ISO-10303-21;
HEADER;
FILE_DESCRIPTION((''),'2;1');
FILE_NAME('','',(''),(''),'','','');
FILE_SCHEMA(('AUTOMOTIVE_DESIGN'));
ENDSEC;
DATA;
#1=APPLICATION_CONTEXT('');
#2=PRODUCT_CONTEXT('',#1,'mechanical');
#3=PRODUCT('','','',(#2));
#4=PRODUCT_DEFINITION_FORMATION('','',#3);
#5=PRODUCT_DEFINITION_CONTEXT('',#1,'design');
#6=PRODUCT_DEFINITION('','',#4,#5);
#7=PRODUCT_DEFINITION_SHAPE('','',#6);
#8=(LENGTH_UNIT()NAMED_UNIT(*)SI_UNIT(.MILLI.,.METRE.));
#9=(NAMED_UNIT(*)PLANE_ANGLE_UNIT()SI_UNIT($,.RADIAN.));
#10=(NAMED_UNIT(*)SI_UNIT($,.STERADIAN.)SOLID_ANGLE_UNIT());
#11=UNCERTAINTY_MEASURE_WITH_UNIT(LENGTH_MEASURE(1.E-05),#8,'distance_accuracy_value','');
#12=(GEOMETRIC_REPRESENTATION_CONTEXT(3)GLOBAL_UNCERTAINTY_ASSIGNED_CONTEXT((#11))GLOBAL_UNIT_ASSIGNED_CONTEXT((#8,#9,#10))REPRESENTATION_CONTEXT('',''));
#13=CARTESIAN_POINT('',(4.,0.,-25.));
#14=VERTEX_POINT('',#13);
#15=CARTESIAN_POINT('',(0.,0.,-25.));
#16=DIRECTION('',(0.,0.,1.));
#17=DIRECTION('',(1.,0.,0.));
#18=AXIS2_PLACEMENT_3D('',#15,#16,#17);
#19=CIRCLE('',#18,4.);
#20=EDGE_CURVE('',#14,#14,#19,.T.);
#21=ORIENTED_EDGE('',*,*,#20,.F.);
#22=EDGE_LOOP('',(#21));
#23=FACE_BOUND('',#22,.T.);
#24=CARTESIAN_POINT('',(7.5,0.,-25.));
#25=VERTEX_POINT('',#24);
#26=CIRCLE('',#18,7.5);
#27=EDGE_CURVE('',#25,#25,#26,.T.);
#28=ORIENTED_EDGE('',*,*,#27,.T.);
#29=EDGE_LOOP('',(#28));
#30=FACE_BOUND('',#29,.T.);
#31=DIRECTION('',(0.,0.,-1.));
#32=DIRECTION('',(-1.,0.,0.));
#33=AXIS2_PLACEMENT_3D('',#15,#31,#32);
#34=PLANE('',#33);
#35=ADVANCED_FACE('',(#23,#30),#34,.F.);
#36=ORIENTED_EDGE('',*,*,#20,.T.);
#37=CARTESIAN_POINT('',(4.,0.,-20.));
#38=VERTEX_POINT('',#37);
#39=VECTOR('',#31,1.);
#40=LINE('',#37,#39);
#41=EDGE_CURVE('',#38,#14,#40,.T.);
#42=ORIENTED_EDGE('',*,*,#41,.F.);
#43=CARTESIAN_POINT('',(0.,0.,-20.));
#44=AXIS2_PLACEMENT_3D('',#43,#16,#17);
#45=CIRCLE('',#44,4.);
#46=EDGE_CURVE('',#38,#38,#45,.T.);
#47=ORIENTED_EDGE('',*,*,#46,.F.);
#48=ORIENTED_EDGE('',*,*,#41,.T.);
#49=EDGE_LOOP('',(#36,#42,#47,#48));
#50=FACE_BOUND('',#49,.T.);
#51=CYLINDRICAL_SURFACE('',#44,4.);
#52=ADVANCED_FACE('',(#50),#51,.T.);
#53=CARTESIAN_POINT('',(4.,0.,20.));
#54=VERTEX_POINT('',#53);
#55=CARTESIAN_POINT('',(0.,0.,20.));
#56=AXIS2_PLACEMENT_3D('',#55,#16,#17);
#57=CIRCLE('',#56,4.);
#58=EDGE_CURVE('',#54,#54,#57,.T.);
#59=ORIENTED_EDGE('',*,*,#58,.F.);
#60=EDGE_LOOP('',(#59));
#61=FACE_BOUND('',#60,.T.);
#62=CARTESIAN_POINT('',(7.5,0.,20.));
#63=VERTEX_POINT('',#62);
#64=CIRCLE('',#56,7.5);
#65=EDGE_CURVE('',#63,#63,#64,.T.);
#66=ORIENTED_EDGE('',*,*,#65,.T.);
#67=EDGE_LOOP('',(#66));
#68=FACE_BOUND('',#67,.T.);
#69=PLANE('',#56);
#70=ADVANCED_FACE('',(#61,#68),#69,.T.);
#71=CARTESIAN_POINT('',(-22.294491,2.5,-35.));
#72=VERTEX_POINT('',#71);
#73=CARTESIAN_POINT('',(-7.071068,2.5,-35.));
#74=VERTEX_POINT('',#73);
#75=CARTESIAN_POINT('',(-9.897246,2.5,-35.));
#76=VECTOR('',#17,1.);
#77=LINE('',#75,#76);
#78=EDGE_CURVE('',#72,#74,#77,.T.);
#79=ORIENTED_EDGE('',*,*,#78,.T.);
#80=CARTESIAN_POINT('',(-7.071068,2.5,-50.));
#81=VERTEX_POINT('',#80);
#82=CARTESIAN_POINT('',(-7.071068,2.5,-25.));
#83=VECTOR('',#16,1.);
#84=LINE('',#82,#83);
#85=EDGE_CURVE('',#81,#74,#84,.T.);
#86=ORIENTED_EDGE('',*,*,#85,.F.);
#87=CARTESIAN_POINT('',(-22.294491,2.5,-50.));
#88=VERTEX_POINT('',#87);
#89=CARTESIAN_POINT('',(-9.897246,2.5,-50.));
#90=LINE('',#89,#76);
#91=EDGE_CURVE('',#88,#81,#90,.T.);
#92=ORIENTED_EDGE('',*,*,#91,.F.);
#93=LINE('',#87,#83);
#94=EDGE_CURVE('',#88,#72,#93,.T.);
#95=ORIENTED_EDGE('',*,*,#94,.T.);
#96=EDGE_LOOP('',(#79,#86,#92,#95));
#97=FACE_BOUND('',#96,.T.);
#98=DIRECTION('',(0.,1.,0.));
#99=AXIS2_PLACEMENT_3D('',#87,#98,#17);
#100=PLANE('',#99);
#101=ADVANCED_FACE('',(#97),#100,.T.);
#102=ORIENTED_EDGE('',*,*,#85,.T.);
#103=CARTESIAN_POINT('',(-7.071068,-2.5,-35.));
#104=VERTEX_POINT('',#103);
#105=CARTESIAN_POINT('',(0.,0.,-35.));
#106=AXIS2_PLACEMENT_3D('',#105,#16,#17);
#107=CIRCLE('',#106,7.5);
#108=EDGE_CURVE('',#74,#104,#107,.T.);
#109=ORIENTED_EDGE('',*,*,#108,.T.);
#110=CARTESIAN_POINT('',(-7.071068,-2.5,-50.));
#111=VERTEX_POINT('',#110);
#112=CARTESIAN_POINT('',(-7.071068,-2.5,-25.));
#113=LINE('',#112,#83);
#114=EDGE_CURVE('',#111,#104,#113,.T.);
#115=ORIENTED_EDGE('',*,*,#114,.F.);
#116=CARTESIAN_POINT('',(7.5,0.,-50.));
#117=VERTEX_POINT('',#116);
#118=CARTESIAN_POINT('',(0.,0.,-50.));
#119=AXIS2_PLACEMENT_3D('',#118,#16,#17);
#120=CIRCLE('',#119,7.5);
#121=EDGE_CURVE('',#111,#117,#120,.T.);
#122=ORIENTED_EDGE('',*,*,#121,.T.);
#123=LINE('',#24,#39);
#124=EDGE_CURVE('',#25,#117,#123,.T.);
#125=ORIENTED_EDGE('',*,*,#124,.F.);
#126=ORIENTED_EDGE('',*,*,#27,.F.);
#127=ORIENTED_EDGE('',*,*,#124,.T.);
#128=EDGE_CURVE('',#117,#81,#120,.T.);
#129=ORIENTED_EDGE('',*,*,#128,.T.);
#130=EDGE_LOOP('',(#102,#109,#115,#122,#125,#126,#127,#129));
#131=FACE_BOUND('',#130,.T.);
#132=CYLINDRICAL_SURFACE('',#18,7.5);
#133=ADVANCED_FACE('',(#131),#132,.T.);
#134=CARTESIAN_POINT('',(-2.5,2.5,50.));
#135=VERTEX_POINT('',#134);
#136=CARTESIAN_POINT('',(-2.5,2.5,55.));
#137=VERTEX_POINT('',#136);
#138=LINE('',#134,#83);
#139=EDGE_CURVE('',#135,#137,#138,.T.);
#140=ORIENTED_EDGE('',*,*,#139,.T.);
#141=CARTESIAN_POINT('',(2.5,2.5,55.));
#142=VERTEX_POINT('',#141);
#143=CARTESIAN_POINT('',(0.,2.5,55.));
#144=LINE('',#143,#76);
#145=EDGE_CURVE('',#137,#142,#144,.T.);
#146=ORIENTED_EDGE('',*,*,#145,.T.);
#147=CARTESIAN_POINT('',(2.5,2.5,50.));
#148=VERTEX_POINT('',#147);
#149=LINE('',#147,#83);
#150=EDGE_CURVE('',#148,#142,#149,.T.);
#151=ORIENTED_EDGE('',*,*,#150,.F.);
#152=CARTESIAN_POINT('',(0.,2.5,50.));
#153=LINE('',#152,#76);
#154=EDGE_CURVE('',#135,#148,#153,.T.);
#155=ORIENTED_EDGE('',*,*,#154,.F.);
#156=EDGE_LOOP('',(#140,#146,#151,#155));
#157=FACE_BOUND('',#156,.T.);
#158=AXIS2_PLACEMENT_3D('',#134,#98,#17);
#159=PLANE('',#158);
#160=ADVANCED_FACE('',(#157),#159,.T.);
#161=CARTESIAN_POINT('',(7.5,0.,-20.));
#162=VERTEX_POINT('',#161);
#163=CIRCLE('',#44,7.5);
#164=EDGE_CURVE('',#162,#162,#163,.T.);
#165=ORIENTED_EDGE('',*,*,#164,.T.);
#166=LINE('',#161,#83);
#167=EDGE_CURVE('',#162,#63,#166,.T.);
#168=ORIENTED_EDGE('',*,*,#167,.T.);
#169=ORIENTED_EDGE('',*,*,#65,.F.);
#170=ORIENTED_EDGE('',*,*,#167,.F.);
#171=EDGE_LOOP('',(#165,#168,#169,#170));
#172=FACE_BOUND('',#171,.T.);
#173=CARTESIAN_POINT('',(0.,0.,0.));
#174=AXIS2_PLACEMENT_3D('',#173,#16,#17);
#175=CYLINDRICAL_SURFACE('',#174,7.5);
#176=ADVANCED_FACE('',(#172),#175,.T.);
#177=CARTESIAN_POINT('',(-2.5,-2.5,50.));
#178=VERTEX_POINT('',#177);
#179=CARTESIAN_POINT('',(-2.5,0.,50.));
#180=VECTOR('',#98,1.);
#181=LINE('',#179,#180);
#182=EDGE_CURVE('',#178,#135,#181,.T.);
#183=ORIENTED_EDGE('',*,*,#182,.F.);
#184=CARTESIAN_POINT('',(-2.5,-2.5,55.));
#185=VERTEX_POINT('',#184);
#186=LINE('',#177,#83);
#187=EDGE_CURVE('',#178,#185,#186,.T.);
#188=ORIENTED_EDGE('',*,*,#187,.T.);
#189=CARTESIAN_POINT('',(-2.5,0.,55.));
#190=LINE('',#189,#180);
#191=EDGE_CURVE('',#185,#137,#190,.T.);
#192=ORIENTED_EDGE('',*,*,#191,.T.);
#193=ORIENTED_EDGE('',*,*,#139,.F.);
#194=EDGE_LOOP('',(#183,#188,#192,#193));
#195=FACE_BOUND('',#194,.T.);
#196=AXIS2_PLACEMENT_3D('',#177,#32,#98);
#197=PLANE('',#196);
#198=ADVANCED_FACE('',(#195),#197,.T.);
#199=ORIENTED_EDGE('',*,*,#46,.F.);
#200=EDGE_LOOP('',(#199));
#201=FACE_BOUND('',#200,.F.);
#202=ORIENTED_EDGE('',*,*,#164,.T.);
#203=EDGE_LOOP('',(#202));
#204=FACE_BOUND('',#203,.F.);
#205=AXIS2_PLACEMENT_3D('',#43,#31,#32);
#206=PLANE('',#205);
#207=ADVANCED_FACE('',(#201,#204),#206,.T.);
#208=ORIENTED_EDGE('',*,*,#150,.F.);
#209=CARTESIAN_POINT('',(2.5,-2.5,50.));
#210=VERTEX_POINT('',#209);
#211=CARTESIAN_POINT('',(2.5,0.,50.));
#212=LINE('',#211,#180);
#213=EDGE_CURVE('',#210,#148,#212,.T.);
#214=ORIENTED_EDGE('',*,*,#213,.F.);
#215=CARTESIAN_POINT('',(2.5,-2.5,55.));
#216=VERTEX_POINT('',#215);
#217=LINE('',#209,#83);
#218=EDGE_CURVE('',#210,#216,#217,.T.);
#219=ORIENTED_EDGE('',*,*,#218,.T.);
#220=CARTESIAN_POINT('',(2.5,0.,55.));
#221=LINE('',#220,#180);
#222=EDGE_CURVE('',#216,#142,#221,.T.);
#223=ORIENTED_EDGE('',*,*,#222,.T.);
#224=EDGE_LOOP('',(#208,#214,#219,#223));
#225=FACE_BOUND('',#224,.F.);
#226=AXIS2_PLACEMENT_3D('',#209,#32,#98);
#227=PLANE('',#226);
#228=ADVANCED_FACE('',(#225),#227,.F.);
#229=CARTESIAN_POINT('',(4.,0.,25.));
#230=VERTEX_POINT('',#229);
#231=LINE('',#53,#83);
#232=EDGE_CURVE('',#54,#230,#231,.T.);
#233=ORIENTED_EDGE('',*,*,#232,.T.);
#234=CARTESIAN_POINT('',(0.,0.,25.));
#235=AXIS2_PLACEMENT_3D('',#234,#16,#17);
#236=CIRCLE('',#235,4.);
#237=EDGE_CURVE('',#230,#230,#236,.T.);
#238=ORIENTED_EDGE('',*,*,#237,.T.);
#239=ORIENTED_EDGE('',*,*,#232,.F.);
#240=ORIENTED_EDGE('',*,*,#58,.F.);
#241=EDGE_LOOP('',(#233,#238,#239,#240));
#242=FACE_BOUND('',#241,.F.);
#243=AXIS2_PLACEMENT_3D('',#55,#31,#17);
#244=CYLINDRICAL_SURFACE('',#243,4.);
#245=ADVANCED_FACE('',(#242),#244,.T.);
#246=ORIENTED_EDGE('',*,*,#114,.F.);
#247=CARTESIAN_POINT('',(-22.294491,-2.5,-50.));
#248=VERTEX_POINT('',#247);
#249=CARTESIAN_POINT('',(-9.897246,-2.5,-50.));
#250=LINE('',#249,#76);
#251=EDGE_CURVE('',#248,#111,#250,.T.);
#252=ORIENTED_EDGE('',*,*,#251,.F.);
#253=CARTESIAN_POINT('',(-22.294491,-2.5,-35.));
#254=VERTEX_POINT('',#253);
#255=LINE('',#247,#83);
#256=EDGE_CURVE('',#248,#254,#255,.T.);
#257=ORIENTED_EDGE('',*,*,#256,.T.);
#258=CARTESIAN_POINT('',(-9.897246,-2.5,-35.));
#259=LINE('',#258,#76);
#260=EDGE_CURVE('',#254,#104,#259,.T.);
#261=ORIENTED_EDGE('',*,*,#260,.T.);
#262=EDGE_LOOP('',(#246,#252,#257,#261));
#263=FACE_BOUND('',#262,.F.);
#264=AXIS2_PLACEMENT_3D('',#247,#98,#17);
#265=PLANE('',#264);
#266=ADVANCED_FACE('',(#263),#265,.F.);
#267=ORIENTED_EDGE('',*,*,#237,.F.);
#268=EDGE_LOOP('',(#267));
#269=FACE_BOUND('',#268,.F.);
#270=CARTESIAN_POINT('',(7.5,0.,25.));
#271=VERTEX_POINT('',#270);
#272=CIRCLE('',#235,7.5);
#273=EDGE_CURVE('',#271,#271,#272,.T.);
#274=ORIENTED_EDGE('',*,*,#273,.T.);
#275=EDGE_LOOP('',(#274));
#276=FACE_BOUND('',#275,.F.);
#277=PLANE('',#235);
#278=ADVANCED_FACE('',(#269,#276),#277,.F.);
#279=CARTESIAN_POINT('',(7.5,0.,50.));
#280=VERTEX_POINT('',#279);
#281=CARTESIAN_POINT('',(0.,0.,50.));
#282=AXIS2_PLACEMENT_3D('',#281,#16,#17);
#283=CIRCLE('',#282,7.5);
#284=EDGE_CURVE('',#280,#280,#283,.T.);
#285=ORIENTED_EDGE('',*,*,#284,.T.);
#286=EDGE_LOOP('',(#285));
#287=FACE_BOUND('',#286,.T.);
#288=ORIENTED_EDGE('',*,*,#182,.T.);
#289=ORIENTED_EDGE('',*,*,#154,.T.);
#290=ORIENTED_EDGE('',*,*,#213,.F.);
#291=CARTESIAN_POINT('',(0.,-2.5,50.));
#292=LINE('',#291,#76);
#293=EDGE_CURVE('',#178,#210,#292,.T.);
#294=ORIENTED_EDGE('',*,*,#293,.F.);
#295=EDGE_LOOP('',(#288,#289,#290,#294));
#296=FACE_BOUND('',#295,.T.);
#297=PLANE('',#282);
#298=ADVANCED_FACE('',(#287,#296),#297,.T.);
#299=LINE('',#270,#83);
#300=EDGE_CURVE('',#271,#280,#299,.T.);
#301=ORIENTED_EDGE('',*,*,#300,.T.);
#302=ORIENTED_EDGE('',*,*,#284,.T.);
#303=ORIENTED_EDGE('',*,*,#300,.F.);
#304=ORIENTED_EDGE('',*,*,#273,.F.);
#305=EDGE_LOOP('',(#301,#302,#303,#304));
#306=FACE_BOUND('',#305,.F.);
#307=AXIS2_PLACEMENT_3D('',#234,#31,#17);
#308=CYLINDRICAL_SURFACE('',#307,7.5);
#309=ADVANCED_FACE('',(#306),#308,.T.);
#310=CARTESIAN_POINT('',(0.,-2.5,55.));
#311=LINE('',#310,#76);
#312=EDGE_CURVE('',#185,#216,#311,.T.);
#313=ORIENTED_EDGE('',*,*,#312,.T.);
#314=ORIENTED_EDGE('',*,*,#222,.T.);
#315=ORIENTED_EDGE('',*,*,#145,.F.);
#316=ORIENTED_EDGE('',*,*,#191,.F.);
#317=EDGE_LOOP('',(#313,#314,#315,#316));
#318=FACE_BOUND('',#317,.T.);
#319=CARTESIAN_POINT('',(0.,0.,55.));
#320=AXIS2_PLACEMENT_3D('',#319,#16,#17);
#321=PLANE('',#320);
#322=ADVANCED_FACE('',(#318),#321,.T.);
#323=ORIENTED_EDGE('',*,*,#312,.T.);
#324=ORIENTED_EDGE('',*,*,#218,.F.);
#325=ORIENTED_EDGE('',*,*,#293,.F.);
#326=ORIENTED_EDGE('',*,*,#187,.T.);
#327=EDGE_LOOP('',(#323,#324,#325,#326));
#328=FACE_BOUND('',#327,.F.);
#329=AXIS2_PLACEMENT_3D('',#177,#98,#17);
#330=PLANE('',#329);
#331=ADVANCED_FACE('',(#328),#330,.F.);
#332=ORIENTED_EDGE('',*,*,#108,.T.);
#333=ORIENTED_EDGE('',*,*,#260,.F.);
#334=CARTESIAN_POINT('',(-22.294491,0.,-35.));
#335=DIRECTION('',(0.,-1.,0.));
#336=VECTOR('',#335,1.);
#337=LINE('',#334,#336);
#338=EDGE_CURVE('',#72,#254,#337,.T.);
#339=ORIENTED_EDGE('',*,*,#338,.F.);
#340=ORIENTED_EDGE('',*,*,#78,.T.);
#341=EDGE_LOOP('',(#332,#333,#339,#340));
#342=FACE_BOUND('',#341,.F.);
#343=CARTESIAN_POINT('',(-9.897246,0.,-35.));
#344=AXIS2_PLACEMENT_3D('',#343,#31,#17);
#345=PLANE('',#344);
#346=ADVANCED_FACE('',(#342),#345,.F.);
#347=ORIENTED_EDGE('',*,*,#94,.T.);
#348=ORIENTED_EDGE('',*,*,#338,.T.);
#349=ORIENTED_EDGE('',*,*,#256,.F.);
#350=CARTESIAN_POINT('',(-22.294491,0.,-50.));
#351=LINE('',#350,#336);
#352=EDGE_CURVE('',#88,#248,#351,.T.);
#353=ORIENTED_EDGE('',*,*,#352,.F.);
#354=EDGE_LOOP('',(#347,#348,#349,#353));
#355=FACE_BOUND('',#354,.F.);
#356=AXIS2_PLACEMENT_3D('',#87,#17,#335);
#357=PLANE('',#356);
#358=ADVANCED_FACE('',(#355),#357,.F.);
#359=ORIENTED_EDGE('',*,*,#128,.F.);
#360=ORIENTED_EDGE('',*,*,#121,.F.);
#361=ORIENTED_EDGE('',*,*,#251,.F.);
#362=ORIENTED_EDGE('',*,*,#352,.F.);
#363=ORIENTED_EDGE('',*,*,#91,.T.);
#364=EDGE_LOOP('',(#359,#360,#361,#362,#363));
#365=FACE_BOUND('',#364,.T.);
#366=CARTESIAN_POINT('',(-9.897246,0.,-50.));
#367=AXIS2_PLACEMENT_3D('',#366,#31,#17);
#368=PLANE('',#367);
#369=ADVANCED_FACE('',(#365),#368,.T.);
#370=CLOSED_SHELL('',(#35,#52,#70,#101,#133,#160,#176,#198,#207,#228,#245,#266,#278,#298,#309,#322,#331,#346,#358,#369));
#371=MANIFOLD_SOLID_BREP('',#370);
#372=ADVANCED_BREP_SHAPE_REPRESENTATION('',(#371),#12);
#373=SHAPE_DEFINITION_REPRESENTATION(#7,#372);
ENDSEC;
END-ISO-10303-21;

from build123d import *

# Parameters (mm, degrees)
F0_R      = 7.5
F1_DEPTH  = 20
F2_R      = 4
F3_DEPTH  = 5
F4_R      = 7.5
F4_R_2    = 4
F5_DEPTH  = 25
F7_W      = 5
F7_H      = 5
F8_DEPTH  = 5
F9_W      = 24.7944914738
F9_H      = 5
F10_DEPTH = 15


with BuildPart() as f1:
    # F0 (on Top) → F1 (new body)
    with BuildSketch(Plane.XY):
        Circle(F0_R)
    extrude(amount=F1_DEPTH)

    # F2 (on face) → F3 (join)
    with BuildSketch(Plane.XY.offset(20)):
        Circle(F2_R)
    extrude(amount=F3_DEPTH)

    # F4 (on face) → F5 (join)
    with BuildSketch(Plane.XY.offset(25)):
        Circle(F4_R)
        Circle(F4_R_2, mode=Mode.SUBTRACT)
        Circle(F4_R_2)
    extrude(amount=F5_DEPTH)

    # F6: F1 across plane


with BuildPart() as f1_1:
    add(f1.part)
    add(f1.part.mirror(Plane.XY))

    # F7 (on face) → F8 (join)
    with BuildSketch(Plane.XY.offset(50)):
        Rectangle(F7_W, F7_H)
    extrude(amount=F8_DEPTH)

    # F9 (on face) → F10 (join)
    with BuildSketch(Plane(origin=(0, 0, -50), x_dir=(1, 0, 0), z_dir=(0, 0, -1))):
        with Locations((-9.8972457369, 0)):
            Rectangle(F9_W, F9_H)
    extrude(amount=-F10_DEPTH)


solid = f1_1.part
